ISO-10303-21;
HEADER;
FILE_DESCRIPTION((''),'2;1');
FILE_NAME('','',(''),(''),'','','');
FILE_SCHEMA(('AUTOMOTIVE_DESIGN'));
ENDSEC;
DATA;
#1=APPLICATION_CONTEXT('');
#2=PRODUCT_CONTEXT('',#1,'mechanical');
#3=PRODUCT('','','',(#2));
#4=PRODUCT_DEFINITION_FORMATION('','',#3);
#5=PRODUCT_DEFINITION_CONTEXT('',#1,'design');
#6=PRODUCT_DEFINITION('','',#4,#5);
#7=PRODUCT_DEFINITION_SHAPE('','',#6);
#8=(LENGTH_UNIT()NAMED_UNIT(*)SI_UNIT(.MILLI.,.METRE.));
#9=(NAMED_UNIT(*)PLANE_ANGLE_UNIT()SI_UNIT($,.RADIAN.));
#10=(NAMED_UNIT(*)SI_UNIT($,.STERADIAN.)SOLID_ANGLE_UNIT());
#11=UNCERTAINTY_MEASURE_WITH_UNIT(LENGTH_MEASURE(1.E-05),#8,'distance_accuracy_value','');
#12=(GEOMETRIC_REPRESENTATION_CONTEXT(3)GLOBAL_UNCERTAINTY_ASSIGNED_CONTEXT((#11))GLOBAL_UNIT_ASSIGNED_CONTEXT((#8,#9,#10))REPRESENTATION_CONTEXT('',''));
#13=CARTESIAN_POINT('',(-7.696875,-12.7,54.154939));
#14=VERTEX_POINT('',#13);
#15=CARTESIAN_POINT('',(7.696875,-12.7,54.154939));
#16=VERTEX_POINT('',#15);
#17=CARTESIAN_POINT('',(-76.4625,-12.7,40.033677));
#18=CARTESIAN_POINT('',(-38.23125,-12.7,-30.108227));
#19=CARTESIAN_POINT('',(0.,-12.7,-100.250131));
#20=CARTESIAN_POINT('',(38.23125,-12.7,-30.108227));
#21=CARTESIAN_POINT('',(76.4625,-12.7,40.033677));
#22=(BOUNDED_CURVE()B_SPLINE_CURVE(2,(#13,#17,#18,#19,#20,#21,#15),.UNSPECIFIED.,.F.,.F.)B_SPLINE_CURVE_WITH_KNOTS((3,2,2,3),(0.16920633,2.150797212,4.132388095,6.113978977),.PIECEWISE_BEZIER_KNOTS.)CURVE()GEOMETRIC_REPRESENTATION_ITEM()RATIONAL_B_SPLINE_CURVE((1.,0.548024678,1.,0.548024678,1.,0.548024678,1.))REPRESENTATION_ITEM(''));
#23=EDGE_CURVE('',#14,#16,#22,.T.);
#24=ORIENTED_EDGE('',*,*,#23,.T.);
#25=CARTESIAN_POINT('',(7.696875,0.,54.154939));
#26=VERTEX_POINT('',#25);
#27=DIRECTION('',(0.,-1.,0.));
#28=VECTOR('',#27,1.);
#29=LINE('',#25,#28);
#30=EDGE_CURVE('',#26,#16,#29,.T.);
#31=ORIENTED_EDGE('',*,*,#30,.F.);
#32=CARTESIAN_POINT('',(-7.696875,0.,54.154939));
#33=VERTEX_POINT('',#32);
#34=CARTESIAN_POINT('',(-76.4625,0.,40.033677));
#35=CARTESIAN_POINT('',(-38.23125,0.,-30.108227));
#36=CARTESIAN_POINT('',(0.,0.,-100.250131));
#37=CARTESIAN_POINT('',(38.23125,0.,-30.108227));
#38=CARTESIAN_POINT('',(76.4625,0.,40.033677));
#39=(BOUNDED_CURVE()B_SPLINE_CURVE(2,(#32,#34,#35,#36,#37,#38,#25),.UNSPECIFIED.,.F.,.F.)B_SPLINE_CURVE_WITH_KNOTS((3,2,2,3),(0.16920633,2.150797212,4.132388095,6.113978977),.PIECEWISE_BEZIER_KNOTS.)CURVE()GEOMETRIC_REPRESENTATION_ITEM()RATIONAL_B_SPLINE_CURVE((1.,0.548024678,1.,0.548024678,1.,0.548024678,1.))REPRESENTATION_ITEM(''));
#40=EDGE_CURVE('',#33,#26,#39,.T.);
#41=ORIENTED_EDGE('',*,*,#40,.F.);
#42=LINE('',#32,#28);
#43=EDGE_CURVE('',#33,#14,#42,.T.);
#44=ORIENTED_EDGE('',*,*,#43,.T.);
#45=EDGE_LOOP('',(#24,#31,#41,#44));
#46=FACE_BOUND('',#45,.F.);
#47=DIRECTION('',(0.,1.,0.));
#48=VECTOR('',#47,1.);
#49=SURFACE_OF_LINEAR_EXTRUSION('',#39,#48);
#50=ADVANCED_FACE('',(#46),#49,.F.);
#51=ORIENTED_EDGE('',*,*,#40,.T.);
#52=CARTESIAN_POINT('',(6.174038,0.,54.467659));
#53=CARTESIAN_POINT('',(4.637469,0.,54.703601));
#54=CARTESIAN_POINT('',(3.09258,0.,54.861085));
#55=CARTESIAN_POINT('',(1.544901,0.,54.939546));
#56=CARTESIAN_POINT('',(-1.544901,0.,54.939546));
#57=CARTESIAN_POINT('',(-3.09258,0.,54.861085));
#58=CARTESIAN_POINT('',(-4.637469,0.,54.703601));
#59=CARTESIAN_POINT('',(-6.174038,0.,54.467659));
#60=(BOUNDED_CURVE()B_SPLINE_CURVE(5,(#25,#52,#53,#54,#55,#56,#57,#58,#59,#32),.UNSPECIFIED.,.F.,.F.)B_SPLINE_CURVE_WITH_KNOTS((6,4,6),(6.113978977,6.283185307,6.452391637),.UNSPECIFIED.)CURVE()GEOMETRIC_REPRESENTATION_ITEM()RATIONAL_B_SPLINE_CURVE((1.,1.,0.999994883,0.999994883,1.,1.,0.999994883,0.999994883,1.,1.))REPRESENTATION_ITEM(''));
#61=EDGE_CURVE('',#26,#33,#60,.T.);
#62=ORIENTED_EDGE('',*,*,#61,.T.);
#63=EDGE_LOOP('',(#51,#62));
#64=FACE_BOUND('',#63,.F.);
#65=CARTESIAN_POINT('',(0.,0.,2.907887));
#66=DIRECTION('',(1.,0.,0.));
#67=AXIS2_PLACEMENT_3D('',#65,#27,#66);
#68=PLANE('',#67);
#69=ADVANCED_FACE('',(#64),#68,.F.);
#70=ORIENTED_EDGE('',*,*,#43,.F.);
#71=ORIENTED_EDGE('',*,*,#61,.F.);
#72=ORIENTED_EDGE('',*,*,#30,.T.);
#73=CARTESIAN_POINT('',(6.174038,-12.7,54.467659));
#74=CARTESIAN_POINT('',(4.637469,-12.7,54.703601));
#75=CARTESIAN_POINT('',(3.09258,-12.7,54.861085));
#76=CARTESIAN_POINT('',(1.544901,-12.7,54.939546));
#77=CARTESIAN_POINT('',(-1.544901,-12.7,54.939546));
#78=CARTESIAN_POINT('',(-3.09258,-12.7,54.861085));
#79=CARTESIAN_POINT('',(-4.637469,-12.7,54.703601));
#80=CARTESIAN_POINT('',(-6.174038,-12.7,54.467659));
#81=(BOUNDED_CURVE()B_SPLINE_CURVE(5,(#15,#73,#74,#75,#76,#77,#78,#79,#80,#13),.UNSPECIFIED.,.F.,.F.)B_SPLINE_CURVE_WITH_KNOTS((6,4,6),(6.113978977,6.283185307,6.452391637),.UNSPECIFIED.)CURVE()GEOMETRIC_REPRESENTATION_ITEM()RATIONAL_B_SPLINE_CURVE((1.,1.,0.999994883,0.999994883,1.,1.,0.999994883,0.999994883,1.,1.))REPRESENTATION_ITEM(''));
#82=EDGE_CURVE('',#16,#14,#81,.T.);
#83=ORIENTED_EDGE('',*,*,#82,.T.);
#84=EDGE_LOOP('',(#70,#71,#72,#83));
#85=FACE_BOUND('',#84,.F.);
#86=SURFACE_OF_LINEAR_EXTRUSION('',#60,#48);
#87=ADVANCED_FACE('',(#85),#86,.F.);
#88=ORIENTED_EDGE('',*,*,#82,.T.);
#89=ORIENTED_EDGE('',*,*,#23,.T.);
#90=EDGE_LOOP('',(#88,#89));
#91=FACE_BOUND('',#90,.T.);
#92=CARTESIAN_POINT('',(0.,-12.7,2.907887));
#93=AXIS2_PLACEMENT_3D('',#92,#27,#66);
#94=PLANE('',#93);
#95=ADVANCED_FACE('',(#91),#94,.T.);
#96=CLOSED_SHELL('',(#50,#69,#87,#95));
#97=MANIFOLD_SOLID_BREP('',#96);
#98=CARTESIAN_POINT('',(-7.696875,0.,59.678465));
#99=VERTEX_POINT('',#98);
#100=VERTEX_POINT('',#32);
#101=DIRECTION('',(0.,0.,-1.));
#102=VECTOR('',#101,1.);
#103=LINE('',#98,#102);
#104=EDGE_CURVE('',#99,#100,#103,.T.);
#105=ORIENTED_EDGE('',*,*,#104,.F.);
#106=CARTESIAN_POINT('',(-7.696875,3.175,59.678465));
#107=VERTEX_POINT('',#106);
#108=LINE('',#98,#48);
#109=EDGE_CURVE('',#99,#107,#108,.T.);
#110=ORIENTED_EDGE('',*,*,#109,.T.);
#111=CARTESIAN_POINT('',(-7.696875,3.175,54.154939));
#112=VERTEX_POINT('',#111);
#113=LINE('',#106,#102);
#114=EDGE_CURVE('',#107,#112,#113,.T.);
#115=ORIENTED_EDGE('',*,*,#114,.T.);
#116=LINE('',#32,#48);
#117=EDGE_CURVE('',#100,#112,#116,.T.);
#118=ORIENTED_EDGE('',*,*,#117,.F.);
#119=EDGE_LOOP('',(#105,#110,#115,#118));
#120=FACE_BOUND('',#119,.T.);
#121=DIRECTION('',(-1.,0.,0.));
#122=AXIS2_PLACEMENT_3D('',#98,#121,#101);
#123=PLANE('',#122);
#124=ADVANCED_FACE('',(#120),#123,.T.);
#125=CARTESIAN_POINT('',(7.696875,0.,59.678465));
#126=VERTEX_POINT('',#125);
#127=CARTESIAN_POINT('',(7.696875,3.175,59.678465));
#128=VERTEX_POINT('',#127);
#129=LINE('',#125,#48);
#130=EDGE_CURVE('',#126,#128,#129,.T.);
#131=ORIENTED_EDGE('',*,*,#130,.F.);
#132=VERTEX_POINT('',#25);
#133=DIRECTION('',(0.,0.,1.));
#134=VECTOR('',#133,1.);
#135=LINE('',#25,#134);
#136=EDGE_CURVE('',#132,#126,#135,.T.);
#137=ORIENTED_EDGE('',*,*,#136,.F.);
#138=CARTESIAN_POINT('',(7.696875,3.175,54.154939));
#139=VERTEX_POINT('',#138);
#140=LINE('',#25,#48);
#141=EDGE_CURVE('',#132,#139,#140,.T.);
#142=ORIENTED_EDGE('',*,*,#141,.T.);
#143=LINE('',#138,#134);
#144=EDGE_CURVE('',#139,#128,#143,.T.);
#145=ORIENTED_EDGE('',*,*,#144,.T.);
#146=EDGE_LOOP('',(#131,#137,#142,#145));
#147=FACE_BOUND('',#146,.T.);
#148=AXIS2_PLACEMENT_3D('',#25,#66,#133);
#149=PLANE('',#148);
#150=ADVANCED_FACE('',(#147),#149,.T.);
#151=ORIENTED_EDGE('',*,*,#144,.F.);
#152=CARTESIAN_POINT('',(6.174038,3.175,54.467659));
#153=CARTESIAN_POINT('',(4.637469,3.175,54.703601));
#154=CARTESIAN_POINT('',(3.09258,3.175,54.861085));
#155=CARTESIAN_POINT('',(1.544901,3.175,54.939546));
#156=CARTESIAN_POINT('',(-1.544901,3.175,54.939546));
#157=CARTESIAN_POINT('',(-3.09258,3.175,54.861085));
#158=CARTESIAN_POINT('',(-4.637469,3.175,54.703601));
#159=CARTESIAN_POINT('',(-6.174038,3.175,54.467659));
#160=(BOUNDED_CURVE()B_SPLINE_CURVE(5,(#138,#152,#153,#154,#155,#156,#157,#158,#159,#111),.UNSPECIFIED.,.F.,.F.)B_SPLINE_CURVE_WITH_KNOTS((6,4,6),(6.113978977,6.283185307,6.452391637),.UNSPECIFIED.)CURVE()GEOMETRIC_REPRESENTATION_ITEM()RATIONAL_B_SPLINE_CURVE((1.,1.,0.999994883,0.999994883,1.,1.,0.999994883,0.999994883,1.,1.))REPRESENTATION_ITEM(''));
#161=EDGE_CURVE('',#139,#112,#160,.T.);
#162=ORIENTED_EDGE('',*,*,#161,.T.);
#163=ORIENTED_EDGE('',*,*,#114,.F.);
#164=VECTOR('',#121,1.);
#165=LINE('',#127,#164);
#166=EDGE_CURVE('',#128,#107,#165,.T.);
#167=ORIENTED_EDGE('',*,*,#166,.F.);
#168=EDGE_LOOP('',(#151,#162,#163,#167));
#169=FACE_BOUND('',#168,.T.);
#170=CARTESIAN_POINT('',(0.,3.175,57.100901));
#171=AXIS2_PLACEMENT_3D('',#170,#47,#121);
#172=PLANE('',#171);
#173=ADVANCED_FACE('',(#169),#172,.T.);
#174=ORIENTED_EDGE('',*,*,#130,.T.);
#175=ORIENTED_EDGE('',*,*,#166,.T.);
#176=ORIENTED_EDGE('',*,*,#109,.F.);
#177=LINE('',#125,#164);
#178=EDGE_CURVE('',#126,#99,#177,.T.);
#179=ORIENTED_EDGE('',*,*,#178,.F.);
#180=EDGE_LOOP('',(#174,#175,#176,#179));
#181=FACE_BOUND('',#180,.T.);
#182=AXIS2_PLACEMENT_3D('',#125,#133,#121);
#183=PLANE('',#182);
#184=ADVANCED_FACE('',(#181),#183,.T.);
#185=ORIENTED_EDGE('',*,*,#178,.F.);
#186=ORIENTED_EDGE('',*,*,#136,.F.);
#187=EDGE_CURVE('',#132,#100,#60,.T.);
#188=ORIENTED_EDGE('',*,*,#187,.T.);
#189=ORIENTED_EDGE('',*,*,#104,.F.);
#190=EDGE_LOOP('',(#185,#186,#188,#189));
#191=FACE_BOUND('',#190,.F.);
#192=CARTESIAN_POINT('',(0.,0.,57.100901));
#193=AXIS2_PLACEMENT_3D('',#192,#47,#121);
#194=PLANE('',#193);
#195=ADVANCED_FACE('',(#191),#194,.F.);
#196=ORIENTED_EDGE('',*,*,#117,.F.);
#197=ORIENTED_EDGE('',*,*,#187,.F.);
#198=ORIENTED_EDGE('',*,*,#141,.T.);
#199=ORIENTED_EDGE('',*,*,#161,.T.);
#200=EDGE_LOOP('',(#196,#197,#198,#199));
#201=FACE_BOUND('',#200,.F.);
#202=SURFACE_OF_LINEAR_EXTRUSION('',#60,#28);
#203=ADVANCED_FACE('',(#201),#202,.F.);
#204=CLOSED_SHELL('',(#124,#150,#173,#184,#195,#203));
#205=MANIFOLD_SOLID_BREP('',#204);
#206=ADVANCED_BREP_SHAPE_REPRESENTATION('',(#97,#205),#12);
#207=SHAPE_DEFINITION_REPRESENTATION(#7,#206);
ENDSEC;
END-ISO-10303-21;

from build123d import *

# Parameters (mm, degrees)
F0_W     = 15.3937507421
F0_H     = 6.1911940575
F1_DEPTH = 12.7
F2_DEPTH = 3.175


# Not quite as in the source:
# - a feature names something its author has since deleted; it is built from what else it names


with BuildPart() as f1:
    # F0 (on Front) → F1 (new body)
    with BuildSketch(Plane.XZ):
        with BuildLine():
            Line((-7.696875371, 50.2006262541), (-7.696875371, 54.1549392845))
            add(Edge.make_bspline(
                [(-7.696875371, 54.1549392845), (-76.4624997725, 40.0336773305), (-38.2312498863, -30.1082268122), (0, -100.2501309548), (38.2312498863, -30.1082268122), (76.4624997725, 40.0336773305), (7.696875371, 54.1549392845)],
                knots=[0.16920633, 0.16920633, 0.16920633, 2.1507972124, 2.1507972124, 4.1323880948, 4.1323880948, 6.1139789772, 6.1139789772, 6.1139789772], degree=2, weights=[1, 0.5480246776, 1, 0.5480246776, 1, 0.5480246776, 1]))
            Line((7.696875371, 54.1549392845), (7.696875371, 50.2006262541))
            Line((7.696875371, 50.2006262541), (7.696875371, 44.0094321966))
            Line((7.696875371, 44.0094321966), (-7.696875371, 44.0094321966))
            Line((-7.696875371, 44.0094321966), (-7.696875371, 50.2006262541))
        make_face()
        with BuildLine():
            add(Edge.make_bspline(
                [(7.696875371, 54.1549392845), (3.8761156095, 54.939545691), (0, 54.939545691)],
                knots=[6.1139789772, 6.1139789772, 6.1139789772, 6.2831853072, 6.2831853072, 6.2831853072], degree=2, weights=[1, 0.9964232864, 1]))
            add(Edge.make_bspline(
                [(0, 54.939545691), (-3.8761156095, 54.939545691), (-7.696875371, 54.1549392845)],
                knots=[0, 0, 0, 0.16920633, 0.16920633, 0.16920633], degree=2, weights=[1, 0.9964232864, 1]))
            Line((-7.696875371, 54.1549392845), (-7.696875371, 50.2006262541))
            Line((-7.696875371, 50.2006262541), (7.696875371, 50.2006262541))
            Line((7.696875371, 50.2006262541), (7.696875371, 54.1549392845))
        make_face()
        with Locations((0, 47.1050292253)):
            Rectangle(F0_W, F0_H)
    extrude(amount=F1_DEPTH)


with BuildPart() as f2:
    # F0 (on Front) → F2 (new body)
    with BuildSketch(Plane.XZ):
        with BuildLine():
            add(Edge.make_bspline(
                [(0, 54.939545691), (-3.8761156095, 54.939545691), (-7.696875371, 54.1549392845)],
                knots=[0, 0, 0, 0.16920633, 0.16920633, 0.16920633], degree=2, weights=[1, 0.9964232864, 1]))
            add(Edge.make_bspline(
                [(7.696875371, 54.1549392845), (3.8761156095, 54.939545691), (0, 54.939545691)],
                knots=[6.1139789772, 6.1139789772, 6.1139789772, 6.2831853072, 6.2831853072, 6.2831853072], degree=2, weights=[1, 0.9964232864, 1]))
            Line((7.696875371, 54.1549392845), (7.696875371, 59.6784651279))
            Line((7.696875371, 59.6784651279), (-7.696875371, 59.6784651279))
            Line((-7.696875371, 59.6784651279), (-7.696875371, 54.1549392845))
        make_face()
    extrude(amount=-F2_DEPTH)


solid = Compound([f1.part, f2.part])
